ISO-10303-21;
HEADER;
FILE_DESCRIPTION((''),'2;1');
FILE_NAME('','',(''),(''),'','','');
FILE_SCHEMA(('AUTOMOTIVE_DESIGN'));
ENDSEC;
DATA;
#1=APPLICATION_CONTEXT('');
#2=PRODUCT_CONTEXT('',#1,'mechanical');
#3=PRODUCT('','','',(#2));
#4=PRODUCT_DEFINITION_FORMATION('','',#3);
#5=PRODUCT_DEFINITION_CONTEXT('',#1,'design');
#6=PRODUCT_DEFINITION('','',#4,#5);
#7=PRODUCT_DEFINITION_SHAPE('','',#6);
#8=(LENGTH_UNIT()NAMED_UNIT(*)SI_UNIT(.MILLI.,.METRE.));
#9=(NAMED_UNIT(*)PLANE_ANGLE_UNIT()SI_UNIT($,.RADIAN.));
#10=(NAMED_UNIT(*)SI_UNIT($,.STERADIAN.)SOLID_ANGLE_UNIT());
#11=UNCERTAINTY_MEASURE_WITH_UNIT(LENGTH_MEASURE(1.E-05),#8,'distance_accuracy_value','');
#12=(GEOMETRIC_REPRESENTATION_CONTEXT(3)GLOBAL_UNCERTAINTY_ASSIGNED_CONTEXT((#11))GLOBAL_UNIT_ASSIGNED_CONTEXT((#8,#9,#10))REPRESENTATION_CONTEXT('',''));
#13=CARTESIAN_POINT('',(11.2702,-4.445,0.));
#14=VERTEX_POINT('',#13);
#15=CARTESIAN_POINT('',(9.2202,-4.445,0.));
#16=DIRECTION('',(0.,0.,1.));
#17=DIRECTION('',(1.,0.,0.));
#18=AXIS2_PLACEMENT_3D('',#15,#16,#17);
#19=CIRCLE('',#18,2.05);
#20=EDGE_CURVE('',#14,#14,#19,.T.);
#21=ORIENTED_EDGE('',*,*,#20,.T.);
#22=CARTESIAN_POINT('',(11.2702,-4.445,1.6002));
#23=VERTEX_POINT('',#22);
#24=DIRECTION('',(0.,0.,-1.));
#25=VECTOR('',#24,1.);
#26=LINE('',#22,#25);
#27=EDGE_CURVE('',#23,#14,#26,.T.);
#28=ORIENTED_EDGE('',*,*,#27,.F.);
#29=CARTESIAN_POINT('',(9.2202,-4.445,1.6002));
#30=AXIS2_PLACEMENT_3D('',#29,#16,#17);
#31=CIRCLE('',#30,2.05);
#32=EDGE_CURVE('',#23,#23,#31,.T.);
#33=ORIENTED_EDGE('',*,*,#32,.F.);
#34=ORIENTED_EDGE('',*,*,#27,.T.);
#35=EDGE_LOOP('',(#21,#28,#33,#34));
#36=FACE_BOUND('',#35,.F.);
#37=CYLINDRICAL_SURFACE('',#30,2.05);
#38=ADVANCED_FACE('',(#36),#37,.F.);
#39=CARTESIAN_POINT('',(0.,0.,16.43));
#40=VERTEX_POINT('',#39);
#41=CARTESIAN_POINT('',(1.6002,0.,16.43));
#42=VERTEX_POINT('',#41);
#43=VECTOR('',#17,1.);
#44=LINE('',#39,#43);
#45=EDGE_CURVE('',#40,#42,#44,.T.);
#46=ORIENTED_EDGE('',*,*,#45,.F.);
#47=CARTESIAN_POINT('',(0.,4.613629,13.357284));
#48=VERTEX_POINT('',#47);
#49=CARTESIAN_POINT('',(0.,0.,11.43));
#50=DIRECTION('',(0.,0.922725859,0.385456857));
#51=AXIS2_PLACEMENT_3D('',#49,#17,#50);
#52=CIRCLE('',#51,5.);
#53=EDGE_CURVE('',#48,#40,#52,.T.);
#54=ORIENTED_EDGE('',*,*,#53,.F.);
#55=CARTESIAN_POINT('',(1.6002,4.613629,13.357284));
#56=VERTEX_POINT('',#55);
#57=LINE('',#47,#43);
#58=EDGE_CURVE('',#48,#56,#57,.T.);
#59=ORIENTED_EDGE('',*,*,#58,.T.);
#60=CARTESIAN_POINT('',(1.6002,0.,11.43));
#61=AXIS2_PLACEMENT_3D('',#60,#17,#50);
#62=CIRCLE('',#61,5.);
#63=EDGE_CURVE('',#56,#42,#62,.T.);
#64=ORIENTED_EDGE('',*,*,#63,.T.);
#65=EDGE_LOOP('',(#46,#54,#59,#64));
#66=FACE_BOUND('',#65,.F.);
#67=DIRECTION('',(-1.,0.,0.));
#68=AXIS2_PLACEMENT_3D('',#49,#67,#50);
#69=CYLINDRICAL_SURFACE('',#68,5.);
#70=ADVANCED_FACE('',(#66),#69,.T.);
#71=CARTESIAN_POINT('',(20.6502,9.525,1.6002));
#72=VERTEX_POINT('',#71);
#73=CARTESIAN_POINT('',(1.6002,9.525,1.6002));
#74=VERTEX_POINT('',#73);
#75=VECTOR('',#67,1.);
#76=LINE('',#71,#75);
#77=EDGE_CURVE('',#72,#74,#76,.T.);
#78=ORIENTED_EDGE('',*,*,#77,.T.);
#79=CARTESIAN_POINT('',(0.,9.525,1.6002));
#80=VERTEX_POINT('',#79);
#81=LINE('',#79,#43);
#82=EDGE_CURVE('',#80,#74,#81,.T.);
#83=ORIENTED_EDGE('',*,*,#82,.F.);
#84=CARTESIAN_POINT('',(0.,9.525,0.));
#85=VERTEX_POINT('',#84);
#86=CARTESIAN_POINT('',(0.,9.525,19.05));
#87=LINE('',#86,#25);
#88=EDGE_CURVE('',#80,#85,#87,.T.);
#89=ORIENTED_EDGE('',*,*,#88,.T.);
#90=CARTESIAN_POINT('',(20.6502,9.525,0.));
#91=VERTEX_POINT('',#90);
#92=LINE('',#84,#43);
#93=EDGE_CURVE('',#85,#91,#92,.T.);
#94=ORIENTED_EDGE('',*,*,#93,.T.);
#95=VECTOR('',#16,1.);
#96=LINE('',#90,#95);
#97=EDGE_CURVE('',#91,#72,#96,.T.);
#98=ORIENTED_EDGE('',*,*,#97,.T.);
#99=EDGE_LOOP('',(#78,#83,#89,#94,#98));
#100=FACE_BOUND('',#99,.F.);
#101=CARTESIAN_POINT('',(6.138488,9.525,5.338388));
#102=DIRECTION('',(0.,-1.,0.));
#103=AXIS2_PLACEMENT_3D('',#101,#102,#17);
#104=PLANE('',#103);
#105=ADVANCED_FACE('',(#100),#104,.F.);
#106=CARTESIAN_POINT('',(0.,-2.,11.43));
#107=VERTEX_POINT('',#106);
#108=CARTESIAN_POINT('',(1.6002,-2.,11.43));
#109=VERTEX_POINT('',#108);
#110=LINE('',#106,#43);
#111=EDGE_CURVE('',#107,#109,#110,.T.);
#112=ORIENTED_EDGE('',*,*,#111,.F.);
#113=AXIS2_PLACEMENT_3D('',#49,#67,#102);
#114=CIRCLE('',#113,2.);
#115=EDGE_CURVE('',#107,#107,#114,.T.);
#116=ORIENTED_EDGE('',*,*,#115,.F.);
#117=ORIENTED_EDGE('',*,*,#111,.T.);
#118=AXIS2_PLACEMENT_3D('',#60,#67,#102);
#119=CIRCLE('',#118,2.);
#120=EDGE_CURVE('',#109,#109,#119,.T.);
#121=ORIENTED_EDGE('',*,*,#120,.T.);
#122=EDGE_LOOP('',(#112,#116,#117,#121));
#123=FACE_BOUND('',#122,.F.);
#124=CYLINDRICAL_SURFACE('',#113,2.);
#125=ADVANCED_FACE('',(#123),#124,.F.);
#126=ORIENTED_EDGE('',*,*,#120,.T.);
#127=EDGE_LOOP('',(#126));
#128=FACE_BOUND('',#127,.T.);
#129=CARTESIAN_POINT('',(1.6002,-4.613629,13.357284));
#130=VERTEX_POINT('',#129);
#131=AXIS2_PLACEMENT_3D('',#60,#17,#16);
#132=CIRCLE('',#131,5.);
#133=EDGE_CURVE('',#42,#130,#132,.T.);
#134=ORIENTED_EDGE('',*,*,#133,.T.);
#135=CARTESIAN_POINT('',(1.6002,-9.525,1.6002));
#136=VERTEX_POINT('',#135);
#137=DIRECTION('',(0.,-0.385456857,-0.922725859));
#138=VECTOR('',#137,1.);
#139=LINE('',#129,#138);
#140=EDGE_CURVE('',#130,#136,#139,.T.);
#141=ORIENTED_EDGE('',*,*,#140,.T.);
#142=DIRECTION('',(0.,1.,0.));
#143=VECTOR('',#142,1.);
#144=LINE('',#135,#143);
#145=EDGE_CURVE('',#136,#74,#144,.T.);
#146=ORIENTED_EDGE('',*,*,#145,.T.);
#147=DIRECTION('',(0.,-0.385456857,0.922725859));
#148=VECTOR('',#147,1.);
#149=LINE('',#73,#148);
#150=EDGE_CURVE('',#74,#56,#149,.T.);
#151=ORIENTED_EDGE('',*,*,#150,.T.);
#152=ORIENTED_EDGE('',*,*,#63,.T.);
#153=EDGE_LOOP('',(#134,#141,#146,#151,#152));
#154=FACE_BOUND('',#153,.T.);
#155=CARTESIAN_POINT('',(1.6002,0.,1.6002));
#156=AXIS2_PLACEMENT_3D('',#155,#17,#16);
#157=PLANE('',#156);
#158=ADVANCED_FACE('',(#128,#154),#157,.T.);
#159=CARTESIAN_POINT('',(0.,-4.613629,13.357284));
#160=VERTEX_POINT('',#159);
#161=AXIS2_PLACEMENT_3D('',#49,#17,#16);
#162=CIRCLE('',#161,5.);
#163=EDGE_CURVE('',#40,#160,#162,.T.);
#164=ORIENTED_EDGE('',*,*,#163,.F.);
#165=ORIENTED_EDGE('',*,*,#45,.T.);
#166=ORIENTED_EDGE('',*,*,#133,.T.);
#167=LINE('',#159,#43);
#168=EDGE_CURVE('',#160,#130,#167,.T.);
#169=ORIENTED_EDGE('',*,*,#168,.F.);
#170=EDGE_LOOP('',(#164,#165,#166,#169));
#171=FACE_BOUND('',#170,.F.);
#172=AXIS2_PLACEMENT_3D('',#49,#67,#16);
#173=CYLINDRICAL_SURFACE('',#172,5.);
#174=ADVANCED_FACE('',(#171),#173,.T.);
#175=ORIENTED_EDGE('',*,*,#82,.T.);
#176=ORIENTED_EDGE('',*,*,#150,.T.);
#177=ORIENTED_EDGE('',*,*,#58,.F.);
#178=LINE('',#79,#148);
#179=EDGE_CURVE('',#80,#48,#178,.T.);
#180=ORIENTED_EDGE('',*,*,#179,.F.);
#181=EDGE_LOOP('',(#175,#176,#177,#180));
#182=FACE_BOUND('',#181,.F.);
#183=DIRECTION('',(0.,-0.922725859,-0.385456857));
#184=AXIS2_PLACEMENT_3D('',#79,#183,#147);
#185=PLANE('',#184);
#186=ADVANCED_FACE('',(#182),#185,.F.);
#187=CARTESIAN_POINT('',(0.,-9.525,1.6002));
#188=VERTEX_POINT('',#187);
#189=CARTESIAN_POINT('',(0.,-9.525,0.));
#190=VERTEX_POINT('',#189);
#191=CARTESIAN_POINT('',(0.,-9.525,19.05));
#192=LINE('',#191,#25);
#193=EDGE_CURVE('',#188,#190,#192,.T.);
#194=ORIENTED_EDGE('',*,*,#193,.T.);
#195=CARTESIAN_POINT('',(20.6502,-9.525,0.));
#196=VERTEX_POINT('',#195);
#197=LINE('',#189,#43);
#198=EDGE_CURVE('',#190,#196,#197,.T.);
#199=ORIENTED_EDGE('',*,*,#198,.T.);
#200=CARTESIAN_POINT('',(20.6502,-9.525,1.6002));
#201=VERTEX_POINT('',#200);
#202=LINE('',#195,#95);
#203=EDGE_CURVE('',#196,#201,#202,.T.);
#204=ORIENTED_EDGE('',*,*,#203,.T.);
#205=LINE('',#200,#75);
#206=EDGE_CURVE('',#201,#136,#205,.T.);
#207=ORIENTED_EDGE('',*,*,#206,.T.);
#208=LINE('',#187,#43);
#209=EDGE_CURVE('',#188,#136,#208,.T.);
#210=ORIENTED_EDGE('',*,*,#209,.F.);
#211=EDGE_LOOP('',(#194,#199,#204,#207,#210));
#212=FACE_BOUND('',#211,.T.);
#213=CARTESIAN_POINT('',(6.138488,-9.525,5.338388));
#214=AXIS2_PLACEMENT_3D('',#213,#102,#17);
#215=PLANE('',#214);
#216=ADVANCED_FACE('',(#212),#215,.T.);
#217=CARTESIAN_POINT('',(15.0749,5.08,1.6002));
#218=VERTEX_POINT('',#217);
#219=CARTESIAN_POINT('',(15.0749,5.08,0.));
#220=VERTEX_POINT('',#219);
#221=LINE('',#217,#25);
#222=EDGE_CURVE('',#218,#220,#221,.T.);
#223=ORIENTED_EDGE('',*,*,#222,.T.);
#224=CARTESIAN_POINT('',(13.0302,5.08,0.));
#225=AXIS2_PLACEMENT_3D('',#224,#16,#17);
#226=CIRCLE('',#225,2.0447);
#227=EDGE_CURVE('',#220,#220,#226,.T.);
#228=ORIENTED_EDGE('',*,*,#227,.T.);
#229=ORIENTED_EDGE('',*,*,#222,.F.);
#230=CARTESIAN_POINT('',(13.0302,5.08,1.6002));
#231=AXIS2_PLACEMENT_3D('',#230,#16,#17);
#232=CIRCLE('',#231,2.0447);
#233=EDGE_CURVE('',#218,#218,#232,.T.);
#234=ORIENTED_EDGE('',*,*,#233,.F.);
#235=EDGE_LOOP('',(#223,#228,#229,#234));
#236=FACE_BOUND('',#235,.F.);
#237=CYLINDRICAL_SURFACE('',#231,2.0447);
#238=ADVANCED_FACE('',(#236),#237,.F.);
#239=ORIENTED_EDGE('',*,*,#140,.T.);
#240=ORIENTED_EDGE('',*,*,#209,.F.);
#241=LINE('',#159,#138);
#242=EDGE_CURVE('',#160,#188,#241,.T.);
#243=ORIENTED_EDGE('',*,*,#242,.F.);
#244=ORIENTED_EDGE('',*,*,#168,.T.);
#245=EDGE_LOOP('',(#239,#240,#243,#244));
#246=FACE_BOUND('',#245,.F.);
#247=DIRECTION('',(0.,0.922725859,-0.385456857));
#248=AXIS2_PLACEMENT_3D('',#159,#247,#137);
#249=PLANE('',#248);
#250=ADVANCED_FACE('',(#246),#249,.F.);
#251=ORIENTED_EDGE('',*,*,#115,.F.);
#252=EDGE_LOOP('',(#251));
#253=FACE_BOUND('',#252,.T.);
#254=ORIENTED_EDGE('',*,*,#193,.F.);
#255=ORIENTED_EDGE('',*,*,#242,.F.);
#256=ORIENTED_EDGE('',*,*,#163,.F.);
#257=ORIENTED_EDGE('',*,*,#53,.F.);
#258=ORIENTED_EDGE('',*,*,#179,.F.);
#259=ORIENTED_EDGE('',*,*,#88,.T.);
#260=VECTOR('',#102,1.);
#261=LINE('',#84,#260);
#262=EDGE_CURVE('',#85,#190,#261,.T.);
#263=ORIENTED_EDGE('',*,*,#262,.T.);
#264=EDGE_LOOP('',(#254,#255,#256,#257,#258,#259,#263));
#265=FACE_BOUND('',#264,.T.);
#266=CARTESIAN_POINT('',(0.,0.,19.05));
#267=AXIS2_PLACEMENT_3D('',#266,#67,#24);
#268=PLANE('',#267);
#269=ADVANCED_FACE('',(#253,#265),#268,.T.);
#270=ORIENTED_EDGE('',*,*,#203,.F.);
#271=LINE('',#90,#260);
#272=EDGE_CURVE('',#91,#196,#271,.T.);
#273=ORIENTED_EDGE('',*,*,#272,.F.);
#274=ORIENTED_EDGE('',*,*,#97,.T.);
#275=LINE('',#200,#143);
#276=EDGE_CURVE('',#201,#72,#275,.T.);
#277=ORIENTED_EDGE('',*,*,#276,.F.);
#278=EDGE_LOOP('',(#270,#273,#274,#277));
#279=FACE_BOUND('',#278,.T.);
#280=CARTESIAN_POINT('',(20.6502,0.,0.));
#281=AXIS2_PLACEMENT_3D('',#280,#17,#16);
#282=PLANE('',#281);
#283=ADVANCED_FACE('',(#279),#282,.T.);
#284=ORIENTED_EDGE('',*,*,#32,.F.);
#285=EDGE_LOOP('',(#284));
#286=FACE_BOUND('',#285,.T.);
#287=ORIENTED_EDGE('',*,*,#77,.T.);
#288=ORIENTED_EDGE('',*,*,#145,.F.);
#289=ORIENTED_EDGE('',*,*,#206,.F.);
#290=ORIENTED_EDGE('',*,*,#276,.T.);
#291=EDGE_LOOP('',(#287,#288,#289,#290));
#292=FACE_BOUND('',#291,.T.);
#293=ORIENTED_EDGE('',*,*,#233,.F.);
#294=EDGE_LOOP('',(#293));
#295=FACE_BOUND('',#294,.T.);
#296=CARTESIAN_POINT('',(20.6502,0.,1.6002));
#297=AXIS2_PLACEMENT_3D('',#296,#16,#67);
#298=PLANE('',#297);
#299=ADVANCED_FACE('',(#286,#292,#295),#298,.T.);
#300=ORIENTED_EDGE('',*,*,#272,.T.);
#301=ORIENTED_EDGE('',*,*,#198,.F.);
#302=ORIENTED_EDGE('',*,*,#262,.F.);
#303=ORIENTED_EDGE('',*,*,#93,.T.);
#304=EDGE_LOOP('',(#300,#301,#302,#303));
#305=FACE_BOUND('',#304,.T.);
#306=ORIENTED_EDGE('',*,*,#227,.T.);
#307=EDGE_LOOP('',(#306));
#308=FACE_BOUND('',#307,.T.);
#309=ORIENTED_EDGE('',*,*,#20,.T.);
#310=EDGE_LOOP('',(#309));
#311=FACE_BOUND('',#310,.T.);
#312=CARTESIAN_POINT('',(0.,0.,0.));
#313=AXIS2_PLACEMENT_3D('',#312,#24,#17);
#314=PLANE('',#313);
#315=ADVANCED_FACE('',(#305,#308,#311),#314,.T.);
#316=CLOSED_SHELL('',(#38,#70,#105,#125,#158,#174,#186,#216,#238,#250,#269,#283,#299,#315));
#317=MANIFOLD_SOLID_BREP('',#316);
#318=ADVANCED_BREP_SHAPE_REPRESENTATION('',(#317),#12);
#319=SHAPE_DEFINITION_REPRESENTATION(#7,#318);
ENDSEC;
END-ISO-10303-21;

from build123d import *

# Parameters (mm, degrees)
F1_DEPTH = 9.525
F2_R     = 2
F3_DEPTH = 1.6002
F5_DEPTH = 1.6002
F6_R     = 2.0447
F6_R_2   = 2.05
F7_DEPTH = 1.6002


# Not quite as in the source:
# - a feature names something its author has since deleted; it is built from what else it names


with BuildPart() as f1:
    # F0 (on Front) → F1 (new body, symmetric)
    with BuildSketch(Plane.XZ):
        Polygon((1.6002, 19.05), (0, 19.05), (0, 0), (20.6502, 0), (20.6502, 1.6002), (1.6002, 1.6002), align=None)
    extrude(amount=F1_DEPTH, both=True)

    # F2 (on face) → F3 (cut, through all)
    with BuildSketch(Plane(origin=(0, 0, 0), x_dir=(0, -1, 0), z_dir=(-1, 0, 0))):
        with Locations((0, 11.43)):
            Circle(F2_R)
    extrude(amount=-F3_DEPTH, mode=Mode.SUBTRACT)

    # F4 (on face) → F5 (cut, through all)
    with BuildSketch(Plane(origin=(0, 0, 0), x_dir=(0, -1, 0), z_dir=(-1, 0, 0))):
        with BuildLine():
            Line((-9.525, 19.05), (-9.525, 1.6002))
            Line((-9.525, 1.6002), (-4.6136292969, 13.3572842838))
            ThreePointArc((-4.6136292969, 13.3572842838), (-2.7716041006, 15.5915154343), (0, 16.43))
            ThreePointArc((0, 16.43), (2.7716041006, 15.5915154343), (4.6136292969, 13.3572842838))
            Line((4.6136292969, 13.3572842838), (9.525, 1.6002))
            Line((9.525, 1.6002), (9.525, 19.05))
            Line((9.525, 19.05), (-9.525, 19.05))
        make_face()
    extrude(amount=-F5_DEPTH, mode=Mode.SUBTRACT)

    # F6 (on face) → F7 (cut, through all)
    with BuildSketch(Plane.XY.offset(1.6002)):
        with Locations((13.0302, 5.08)):
            Circle(F6_R)
        with Locations((9.2202, -4.445)):
            Circle(F6_R_2)
    extrude(amount=-F7_DEPTH, mode=Mode.SUBTRACT)


solid = f1.part
